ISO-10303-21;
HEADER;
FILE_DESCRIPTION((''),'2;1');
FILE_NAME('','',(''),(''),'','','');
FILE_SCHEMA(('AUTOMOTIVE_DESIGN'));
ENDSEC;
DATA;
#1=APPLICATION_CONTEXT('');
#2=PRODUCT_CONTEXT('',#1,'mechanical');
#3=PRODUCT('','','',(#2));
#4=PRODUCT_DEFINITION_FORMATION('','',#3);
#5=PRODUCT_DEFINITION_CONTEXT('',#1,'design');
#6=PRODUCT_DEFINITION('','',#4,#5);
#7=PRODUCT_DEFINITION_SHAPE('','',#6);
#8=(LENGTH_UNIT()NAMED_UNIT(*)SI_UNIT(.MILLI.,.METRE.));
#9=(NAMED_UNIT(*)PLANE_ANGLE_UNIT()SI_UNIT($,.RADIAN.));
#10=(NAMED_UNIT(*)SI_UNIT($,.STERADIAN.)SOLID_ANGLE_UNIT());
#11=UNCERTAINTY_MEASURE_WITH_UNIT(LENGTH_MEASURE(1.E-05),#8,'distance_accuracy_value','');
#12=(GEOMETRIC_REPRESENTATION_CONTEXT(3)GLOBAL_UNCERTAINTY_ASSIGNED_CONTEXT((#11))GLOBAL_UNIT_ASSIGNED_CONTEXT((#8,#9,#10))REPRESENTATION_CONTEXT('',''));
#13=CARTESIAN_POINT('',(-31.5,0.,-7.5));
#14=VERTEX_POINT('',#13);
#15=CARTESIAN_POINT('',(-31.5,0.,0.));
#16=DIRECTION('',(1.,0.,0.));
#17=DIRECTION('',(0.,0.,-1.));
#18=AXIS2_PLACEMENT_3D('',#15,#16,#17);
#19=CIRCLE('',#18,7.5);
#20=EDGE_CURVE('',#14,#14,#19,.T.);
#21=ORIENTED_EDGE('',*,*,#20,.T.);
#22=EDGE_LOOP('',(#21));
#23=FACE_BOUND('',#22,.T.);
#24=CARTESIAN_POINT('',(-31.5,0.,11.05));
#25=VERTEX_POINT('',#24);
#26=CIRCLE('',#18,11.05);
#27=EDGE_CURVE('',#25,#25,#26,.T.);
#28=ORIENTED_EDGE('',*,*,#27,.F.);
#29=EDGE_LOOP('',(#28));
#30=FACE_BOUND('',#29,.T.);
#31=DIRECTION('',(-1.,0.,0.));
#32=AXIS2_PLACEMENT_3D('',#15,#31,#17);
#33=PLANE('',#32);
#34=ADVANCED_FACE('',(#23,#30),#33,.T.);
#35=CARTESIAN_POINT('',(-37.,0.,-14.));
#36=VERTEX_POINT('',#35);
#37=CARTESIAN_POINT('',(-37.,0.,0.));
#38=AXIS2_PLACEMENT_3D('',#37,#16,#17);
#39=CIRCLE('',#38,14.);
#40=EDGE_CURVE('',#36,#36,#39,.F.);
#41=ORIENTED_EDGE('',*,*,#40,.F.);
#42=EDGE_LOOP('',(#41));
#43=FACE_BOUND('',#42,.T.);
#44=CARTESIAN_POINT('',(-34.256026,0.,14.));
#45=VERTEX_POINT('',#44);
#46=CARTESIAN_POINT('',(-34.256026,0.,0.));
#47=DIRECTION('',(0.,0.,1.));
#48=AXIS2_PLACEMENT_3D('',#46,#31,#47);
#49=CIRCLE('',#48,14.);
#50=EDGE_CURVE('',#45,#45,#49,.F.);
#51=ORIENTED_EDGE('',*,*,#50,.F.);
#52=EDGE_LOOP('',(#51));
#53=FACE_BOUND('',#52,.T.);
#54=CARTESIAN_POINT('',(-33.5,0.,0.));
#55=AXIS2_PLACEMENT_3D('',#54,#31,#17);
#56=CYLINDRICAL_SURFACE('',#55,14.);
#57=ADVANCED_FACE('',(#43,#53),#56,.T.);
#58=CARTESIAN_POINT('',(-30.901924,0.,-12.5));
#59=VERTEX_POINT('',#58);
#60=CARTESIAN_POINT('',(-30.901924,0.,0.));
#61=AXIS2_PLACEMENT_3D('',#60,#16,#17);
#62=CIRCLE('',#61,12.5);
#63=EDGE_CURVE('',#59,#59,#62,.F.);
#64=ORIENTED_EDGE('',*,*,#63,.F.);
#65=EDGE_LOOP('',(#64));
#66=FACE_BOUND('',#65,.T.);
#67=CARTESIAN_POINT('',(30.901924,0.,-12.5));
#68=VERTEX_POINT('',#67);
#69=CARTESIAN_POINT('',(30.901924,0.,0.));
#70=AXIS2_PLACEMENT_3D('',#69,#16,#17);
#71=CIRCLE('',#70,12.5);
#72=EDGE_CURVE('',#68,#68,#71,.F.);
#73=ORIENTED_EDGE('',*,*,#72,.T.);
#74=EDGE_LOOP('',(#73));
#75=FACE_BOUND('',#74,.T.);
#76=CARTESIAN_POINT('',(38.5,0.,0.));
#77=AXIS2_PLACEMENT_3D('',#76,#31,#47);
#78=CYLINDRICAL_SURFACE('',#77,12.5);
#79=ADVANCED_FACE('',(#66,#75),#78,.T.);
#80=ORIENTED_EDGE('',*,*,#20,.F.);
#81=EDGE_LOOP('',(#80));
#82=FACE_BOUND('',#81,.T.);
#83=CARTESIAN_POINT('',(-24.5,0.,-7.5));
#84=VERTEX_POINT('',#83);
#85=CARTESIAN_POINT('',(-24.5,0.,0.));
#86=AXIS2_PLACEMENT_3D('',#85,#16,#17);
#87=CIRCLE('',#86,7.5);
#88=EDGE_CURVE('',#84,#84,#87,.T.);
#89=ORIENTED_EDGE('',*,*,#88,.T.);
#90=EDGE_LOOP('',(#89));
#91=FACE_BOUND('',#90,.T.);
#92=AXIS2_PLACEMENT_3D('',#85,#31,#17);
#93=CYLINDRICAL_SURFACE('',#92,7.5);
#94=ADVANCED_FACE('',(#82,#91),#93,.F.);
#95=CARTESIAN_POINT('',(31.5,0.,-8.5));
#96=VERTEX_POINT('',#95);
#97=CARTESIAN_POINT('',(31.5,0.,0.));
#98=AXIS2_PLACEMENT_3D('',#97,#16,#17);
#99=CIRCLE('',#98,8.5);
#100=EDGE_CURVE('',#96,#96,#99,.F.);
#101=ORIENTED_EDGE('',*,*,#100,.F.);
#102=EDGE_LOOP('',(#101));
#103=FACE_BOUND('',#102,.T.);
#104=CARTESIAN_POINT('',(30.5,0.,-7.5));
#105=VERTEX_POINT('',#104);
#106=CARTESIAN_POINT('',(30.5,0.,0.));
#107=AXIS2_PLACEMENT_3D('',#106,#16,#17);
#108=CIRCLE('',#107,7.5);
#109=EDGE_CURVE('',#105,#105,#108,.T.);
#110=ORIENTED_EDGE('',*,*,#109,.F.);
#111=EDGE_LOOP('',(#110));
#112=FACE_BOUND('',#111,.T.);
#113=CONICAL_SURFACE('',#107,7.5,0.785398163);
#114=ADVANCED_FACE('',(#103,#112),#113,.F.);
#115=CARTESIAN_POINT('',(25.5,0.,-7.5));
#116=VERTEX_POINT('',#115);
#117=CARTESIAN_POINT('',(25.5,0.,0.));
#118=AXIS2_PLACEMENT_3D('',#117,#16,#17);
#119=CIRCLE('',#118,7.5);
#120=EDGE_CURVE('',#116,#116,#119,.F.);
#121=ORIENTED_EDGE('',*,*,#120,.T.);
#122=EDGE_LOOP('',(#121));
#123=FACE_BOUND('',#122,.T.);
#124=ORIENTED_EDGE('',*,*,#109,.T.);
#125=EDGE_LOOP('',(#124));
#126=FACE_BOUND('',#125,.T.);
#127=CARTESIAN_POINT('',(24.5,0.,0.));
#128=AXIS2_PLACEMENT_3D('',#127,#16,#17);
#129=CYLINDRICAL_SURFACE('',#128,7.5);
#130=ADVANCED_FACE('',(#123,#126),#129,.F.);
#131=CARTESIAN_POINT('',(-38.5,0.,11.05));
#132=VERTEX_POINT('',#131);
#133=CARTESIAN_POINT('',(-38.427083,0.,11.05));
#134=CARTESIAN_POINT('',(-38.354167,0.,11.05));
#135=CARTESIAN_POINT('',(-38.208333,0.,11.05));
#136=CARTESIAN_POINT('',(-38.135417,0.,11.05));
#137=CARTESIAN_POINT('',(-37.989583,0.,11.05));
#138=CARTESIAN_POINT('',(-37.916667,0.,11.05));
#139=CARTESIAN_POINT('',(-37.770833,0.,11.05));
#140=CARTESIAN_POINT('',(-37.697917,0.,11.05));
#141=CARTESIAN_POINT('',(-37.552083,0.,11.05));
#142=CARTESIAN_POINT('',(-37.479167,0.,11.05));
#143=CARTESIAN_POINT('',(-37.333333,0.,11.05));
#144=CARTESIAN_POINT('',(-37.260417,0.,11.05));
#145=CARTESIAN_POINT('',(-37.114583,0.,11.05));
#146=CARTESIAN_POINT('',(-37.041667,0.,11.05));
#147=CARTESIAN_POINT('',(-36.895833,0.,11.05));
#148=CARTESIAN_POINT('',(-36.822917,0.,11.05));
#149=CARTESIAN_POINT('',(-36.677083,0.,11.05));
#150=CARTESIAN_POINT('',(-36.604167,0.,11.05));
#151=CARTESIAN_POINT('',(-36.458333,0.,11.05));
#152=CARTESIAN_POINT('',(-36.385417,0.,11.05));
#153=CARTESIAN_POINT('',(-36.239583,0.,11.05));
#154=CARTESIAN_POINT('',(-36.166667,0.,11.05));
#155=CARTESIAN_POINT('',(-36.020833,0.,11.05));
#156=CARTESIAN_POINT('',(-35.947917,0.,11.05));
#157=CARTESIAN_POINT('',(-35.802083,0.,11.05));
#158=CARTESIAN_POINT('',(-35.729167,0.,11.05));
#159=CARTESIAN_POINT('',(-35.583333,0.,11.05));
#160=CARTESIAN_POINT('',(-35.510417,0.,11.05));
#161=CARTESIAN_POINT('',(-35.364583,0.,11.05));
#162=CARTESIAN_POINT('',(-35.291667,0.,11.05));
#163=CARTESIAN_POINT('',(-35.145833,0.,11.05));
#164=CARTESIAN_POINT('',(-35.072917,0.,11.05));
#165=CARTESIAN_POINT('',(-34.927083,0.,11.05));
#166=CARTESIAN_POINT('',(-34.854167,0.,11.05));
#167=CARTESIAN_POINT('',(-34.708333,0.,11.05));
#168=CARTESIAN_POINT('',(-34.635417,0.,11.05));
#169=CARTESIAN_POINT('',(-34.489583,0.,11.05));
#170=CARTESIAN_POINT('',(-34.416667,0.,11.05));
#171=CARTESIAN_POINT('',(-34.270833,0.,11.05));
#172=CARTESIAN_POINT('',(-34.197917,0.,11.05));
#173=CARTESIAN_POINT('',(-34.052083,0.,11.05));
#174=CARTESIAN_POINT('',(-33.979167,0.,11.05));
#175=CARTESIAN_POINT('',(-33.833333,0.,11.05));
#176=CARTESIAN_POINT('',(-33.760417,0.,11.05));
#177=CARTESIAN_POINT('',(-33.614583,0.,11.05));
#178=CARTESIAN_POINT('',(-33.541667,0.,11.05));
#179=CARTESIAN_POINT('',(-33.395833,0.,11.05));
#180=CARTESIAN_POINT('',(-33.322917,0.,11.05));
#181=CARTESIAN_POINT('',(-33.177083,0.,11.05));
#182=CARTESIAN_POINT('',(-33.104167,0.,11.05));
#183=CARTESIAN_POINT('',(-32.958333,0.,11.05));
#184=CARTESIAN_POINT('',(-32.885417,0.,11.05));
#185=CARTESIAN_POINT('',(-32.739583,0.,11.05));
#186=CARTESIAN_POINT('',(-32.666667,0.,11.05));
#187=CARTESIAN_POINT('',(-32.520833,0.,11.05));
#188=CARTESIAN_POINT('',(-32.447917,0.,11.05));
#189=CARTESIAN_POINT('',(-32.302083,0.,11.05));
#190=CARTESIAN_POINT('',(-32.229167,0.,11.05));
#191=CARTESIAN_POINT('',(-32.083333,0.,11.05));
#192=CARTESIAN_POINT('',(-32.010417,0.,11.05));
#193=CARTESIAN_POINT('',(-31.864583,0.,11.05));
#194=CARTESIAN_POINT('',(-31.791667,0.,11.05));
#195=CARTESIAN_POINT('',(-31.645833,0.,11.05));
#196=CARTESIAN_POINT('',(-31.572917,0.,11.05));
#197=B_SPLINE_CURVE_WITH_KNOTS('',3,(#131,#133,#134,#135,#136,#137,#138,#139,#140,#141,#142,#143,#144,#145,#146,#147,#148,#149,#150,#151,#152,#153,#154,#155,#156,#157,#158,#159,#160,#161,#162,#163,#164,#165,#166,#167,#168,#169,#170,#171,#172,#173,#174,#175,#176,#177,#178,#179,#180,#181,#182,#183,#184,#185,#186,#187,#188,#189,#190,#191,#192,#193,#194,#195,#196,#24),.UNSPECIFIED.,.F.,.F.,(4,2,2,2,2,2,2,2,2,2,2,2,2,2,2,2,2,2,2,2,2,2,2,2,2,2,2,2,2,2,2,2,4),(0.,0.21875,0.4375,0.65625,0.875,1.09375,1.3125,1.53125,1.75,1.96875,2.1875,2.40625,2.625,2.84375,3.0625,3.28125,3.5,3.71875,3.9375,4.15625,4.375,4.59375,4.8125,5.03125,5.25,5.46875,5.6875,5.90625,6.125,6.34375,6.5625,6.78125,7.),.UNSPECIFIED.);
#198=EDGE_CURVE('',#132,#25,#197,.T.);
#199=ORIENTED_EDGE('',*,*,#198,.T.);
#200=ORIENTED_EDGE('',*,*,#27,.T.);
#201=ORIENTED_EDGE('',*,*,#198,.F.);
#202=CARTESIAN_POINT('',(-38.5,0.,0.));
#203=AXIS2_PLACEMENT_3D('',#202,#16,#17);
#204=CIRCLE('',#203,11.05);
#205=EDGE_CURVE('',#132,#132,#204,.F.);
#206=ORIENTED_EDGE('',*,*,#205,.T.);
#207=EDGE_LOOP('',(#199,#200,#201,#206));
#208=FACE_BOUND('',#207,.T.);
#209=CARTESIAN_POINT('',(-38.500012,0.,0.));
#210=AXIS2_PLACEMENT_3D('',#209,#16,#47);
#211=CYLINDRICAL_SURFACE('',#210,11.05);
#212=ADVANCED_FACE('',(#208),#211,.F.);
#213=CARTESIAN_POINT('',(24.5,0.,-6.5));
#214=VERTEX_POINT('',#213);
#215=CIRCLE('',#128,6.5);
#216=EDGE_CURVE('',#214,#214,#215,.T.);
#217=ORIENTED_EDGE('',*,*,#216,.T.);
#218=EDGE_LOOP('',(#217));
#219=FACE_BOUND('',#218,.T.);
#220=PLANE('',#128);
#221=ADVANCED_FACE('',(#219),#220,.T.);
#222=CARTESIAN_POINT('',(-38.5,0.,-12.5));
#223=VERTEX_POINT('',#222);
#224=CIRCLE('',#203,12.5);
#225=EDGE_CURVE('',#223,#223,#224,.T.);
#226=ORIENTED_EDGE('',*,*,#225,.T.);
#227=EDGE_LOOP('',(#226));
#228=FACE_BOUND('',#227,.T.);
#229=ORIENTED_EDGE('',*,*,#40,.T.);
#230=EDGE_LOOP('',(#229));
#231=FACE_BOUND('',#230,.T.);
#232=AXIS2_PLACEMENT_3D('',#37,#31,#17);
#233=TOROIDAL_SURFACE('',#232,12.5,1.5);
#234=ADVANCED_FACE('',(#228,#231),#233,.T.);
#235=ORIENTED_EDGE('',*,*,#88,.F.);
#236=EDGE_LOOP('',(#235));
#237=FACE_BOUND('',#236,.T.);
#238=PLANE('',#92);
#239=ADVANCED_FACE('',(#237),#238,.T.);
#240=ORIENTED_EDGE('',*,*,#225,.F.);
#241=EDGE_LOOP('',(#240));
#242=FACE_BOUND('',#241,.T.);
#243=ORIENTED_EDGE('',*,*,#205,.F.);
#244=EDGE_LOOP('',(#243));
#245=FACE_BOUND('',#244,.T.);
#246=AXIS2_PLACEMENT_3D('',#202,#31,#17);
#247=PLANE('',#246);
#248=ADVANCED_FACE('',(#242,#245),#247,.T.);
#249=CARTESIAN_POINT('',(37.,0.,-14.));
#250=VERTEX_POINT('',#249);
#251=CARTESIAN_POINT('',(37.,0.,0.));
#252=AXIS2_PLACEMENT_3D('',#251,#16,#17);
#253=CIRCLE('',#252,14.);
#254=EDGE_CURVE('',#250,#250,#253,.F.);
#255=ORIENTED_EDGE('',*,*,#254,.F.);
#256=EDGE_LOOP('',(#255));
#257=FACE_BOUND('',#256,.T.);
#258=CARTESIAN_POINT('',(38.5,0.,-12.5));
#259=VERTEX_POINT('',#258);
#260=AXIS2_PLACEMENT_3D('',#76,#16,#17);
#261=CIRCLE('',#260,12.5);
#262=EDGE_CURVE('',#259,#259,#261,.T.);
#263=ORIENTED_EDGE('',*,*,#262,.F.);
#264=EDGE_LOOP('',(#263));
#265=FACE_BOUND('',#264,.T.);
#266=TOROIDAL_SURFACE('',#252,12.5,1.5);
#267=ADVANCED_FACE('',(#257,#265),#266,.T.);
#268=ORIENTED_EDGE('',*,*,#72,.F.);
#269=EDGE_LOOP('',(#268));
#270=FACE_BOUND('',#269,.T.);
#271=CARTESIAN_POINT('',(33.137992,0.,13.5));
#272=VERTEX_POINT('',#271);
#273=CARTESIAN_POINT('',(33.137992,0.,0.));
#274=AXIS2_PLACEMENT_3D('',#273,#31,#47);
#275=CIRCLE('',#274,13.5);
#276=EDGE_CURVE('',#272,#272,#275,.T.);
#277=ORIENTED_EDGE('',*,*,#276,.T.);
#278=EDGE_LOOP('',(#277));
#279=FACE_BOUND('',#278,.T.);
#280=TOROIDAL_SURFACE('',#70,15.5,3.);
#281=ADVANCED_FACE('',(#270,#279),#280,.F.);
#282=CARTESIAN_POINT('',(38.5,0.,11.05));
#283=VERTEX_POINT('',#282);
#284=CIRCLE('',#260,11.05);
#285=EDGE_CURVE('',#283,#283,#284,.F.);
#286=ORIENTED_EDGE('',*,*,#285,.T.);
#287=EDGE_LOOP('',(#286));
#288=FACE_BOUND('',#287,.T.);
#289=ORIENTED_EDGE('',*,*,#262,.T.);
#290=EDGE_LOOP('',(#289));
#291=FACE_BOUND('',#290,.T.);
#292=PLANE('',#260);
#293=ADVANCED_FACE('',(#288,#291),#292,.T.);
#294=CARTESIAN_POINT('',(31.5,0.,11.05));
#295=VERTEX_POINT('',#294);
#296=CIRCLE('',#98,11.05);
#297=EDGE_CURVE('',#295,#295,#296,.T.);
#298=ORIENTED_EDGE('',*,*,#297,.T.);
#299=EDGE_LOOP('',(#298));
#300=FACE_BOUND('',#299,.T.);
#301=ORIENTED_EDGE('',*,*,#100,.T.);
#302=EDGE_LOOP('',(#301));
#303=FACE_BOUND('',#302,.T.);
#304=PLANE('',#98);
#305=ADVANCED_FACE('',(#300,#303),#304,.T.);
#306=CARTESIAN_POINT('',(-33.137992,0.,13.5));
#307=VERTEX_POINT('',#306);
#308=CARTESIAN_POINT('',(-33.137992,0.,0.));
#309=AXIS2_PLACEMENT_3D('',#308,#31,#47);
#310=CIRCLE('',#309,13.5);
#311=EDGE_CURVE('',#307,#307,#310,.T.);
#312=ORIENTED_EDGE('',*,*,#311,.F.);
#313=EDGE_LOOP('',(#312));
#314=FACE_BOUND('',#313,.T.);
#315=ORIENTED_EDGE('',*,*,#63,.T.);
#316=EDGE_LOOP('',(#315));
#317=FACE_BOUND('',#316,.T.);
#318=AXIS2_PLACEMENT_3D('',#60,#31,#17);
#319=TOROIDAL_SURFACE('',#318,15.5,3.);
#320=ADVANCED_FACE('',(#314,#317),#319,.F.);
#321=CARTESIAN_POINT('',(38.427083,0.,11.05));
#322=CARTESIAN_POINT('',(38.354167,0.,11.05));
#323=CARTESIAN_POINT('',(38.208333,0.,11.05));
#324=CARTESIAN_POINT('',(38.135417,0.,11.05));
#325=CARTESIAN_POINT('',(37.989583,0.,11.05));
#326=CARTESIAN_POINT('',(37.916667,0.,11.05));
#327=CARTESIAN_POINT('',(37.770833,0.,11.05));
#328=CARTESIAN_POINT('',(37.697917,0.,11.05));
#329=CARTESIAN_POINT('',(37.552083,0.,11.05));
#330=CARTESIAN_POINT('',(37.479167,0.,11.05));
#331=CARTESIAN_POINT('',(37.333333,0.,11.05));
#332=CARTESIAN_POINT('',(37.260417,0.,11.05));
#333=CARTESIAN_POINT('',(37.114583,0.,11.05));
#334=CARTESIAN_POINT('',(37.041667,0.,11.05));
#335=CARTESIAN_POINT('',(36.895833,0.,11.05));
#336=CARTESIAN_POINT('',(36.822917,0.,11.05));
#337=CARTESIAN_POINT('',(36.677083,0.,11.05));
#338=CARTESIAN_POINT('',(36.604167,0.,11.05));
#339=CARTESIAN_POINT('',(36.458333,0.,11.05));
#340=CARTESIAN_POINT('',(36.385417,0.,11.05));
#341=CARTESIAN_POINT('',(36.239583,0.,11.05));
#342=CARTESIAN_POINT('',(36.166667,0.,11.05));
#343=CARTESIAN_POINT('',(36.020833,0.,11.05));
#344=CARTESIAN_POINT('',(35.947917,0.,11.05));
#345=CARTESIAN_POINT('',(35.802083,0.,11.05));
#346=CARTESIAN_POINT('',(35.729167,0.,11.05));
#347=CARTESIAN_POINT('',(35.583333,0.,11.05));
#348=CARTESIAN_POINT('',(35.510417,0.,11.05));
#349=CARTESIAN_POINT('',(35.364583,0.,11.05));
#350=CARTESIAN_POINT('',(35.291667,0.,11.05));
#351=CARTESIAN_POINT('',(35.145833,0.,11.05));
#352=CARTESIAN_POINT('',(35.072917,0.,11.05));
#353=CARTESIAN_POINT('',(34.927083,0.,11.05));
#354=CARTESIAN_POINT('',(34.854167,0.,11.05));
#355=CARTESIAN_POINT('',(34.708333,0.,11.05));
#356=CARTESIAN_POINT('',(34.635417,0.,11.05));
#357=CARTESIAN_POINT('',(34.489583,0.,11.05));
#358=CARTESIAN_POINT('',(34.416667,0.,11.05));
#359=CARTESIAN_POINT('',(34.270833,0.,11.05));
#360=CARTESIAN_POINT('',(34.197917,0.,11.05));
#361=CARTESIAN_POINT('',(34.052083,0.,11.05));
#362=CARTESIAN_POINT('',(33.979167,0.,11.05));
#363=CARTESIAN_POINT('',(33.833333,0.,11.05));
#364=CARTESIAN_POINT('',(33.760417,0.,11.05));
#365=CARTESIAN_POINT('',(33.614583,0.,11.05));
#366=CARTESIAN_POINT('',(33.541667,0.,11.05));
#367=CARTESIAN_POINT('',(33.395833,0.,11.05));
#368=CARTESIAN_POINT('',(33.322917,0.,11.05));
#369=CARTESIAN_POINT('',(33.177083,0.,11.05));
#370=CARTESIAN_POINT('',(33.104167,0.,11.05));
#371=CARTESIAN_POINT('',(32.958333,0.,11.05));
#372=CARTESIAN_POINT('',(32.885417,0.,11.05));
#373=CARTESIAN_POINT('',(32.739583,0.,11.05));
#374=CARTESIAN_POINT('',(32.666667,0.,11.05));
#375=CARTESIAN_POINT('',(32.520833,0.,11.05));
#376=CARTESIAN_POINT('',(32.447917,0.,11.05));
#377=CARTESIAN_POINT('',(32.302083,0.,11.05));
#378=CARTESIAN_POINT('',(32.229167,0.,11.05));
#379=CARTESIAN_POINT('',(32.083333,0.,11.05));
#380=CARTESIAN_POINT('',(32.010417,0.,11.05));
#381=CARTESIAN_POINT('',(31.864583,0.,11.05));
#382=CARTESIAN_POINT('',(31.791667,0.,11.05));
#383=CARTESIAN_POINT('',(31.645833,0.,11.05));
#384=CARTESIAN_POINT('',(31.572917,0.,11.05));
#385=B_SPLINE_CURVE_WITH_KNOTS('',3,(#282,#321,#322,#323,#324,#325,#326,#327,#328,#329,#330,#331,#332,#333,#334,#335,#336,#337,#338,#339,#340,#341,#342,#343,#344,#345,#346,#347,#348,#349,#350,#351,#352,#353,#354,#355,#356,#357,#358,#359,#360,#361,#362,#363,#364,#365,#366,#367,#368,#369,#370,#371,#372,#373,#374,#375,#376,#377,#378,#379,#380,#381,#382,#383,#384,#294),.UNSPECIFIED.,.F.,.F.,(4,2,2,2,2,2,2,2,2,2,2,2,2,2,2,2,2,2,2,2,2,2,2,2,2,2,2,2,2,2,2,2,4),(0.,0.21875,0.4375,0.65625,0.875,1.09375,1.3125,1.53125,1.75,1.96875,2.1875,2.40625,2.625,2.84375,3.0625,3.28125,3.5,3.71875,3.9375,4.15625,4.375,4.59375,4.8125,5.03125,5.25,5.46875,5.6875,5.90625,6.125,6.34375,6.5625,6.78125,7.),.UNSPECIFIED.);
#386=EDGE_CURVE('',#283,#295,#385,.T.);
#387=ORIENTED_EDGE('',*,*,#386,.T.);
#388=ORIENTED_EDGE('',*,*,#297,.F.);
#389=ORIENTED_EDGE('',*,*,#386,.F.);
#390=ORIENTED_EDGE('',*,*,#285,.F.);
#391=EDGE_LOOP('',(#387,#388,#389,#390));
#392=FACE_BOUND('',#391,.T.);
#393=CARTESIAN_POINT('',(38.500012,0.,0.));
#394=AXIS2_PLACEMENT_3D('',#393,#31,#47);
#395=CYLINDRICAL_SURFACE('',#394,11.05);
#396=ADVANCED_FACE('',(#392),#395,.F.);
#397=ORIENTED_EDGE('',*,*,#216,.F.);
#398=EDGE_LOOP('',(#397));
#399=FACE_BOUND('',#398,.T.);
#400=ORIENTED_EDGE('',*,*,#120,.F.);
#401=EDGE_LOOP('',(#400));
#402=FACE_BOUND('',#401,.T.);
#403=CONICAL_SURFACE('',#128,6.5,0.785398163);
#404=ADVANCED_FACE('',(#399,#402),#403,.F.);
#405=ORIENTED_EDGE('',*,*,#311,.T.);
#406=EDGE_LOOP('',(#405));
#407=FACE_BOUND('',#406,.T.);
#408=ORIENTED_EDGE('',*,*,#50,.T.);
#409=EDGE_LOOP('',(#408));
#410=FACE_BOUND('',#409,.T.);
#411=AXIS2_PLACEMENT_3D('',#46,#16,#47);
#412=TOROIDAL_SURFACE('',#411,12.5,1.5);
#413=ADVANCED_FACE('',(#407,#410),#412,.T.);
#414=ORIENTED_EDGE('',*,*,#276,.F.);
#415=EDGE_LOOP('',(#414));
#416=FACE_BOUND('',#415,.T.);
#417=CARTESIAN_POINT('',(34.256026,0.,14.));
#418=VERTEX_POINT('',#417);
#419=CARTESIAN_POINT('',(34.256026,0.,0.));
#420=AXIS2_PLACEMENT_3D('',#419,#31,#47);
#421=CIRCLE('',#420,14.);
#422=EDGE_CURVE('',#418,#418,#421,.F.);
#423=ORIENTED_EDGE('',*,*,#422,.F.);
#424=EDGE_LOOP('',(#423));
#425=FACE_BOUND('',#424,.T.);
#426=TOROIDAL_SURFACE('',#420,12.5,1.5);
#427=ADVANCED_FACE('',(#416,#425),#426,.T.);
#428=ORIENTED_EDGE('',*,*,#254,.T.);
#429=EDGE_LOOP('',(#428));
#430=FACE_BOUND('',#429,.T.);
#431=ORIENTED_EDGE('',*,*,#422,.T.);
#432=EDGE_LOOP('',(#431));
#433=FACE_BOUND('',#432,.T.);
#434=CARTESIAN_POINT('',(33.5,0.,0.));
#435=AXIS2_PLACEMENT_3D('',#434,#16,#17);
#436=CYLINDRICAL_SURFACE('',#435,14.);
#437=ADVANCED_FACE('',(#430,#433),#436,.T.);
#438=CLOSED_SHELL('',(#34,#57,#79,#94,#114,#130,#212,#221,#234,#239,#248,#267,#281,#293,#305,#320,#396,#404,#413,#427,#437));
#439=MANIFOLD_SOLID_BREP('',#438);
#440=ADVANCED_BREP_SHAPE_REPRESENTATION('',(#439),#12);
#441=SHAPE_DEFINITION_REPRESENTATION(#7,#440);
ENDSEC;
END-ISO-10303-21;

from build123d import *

# Parameters (mm, degrees)
SKETCH1_R               = 12.5
BOSS_EXTRUDE2_DEPTH     = 38.5
SKETCH3_R               = 14
BOSS_EXTRUDE3_DEPTH     = 5
CUT_EXTRUDE1_DEPTH      = 44.292609069
CUT_EXTRUDE1_DEPTH_BACK = 7
SKETCH4_R               = 11.05
SKETCH5_R               = 7.5
CUT_EXTRUDE2_DEPTH      = 7
FILLET2_R               = 3
FILLET3_R               = 1.5
CHAMFER1_SIZE           = 1


with BuildPart() as part:
    # Sketch1 → Boss-Extrude2 (new body)
    with BuildSketch(Plane(origin=(0, 0, 0), x_dir=(0, 0, -1), z_dir=(1, 0, 0))):
        Circle(SKETCH1_R)
    extrude(amount=BOSS_EXTRUDE2_DEPTH)

    # Sketch3 → Boss-Extrude3 (add)
    with BuildSketch(Plane(origin=(38.5, 0, 0), x_dir=(0, 0, -1), z_dir=(1, 0, 0))):
        Circle(SKETCH3_R)
    extrude(amount=-BOSS_EXTRUDE3_DEPTH)

    # Sketch4 → Cut-Extrude1 (cut, two sides: drawn at the far end of the back side and taken through both)
    with BuildSketch(Plane(origin=(38.5, 0, 0), x_dir=(0, 0, -1), z_dir=(1, 0, 0)).offset(-CUT_EXTRUDE1_DEPTH_BACK)):
        with Locations(Location((0, 0, 0), (0, 0, 180))):
            Circle(SKETCH4_R)
    extrude(amount=CUT_EXTRUDE1_DEPTH + CUT_EXTRUDE1_DEPTH_BACK, mode=Mode.SUBTRACT)

    # Sketch5 → Cut-Extrude2 (cut)
    with BuildSketch(Plane(origin=(31.5, 0, 0), x_dir=(0, 0, -1), z_dir=(1, 0, 0))):
        Circle(SKETCH5_R)
    extrude(amount=-CUT_EXTRUDE2_DEPTH, mode=Mode.SUBTRACT)

    # Fillet2
    # the kernel refuses this fillet: 3 mm, written as the material it adds along each edge
    with BuildSketch(Plane(origin=(33.5, 0, 0), x_dir=(0, 0, -1), z_dir=(0, 1, 0))) as fillet2_piece_1:
        with BuildLine():
            CenterArc((15.5, 2.598076211), FILLET2_R, 180, 60)
            Line((14, 0), (13.97, -0.051961524))
            ThreePointArc((13.97, -0.051961524), (13.25, -0.06), (12.5, -0.06))
            Line((12.5, -0.06), (12.44, 0))
            Line((12.44, 0), (12.44, 2.598076211))
            Line((12.44, 2.598076211), (12.5, 2.598076211))
        make_face()
    revolve(axis=Axis((33.5, 0, 0), (-1, 0, 0)))

    # Fillet3
    fillet3_edges = [part.edges().sort_by_distance(p)[0] for p in [
        (33.5, 0, 14),
        (38.5, 0, 14),
    ]]
    fillet(fillet3_edges, radius=FILLET3_R)

    # Mirror1: part across plane


with BuildPart() as part_1:
    add(part.part)
    add(part.part.mirror(Plane(origin=(0, 0, 0), x_dir=(0, 0, 1), z_dir=(1, 0, 0))))

    # Chamfer1
    chamfer1_edges = [part_1.edges().sort_by_distance(p)[0] for p in [
        (24.5, 0, 7.5),
        (31.5, 0, 7.5),
    ]]
    chamfer(chamfer1_edges, length=CHAMFER1_SIZE)


solid = part_1.part
